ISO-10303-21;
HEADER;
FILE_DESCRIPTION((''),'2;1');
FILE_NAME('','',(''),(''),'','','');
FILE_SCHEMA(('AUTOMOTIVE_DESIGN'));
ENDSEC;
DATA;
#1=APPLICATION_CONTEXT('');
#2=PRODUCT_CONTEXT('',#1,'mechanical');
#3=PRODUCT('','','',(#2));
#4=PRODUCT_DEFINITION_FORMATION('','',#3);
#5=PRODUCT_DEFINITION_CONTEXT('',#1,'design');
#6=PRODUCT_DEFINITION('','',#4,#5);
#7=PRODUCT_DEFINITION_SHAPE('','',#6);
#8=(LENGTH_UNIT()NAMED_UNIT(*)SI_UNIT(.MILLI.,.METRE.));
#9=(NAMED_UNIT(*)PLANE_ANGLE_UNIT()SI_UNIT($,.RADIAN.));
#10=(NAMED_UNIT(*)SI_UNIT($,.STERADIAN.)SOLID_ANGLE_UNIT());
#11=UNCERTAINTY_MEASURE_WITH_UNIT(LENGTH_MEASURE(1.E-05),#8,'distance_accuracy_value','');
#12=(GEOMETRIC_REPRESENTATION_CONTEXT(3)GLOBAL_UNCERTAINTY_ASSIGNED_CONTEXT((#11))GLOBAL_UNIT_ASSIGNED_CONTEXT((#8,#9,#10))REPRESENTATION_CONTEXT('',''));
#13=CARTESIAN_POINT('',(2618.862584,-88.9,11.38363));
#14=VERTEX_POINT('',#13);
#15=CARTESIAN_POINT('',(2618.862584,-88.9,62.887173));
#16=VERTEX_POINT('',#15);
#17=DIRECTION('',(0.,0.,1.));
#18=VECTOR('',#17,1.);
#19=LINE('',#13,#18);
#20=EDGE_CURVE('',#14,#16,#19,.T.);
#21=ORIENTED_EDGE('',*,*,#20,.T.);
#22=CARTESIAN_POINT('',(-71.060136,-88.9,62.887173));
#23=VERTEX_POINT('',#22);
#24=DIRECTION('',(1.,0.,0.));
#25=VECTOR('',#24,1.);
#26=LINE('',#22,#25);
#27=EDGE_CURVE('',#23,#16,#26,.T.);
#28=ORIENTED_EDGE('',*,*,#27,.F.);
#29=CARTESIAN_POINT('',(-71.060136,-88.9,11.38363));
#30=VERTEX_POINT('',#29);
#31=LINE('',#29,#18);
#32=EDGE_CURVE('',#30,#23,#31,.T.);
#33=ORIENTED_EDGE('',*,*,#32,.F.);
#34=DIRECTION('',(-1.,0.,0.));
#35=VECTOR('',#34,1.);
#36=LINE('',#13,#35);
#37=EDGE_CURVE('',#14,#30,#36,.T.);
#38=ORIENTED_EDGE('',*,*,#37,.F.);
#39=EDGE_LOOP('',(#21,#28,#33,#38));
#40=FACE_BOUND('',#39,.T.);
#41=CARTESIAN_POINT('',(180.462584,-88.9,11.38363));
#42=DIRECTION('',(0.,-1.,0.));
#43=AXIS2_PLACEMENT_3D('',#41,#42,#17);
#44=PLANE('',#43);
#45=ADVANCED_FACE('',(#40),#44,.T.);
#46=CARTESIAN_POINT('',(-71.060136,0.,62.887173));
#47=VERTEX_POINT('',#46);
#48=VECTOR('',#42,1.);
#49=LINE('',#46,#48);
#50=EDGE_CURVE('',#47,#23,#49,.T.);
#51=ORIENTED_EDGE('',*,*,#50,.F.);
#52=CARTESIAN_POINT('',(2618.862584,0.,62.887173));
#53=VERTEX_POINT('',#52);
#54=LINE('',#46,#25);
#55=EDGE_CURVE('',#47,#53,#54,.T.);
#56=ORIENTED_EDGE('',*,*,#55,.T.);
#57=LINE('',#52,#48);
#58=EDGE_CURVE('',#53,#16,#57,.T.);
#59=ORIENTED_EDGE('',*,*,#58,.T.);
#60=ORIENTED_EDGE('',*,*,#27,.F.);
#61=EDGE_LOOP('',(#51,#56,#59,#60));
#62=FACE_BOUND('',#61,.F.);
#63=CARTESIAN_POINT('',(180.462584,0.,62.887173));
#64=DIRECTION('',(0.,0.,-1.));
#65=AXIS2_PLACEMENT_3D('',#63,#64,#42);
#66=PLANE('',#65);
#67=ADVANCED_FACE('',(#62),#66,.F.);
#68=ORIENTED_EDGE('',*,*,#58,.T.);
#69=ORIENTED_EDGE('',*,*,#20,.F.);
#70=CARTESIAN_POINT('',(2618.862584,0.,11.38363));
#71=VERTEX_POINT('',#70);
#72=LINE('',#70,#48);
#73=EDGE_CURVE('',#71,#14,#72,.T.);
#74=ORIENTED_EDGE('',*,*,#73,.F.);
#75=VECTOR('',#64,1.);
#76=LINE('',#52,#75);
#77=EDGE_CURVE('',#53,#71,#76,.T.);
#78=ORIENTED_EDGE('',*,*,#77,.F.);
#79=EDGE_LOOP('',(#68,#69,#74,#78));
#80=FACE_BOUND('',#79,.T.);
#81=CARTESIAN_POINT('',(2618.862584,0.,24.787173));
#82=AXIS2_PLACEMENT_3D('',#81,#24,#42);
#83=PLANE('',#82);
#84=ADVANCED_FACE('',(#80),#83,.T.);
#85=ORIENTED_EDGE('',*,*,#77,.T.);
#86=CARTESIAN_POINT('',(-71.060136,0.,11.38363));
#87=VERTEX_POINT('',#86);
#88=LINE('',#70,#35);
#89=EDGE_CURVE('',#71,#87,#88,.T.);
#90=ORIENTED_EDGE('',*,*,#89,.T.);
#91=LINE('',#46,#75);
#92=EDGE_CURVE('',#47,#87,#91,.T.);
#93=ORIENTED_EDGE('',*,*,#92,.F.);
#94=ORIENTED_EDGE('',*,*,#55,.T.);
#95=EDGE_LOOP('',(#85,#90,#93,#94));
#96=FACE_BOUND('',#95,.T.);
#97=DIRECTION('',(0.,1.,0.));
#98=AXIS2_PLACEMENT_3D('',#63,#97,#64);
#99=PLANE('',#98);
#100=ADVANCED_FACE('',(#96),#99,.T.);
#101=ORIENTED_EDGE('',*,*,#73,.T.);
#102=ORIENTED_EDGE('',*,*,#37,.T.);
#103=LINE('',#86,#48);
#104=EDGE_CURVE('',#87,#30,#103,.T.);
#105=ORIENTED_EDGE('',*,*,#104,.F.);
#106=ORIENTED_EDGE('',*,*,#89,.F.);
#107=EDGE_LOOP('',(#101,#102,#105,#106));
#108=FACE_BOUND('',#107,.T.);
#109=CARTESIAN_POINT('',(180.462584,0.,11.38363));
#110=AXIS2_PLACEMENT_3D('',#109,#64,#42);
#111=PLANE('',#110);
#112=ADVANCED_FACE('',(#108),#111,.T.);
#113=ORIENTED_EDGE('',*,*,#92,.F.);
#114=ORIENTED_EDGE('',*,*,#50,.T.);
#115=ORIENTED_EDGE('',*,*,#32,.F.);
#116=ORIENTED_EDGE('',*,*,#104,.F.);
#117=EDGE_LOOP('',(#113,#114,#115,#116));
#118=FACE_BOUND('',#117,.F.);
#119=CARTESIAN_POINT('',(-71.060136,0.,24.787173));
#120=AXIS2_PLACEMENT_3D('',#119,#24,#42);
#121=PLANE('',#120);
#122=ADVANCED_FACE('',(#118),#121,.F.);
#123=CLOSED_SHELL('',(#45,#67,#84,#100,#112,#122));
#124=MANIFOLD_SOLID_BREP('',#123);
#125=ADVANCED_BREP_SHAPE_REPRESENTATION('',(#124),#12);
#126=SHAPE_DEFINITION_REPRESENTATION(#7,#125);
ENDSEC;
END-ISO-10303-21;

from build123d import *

# Parameters (mm, degrees)
F1_W     = 251.5227198601
F1_H     = 13.4035423398
F2_DEPTH = 88.9
F3_DEPTH = 38.1
F4_DEPTH = 2438.4


# Not quite as in the source:
# - a feature of the source that left no trace in its solid (it failed there, or was rolled back) is left out


with BuildPart() as f2:
    # F1 (on face) → F2 (new body)
    with BuildSketch(Plane.XZ):
        with Locations((54.7012239695, 18.0854015052)):
            Rectangle(F1_W, F1_H)
    extrude(amount=F2_DEPTH)

    # F3 (add): a face of the model
    f3_faces = [f2.faces().sort_by_distance(p)[0] for p in [
        (54.7012239695, -44.45, 24.7871726751),
    ]]
    extrude(f3_faces, amount=F3_DEPTH)

    # F4 (add): a face of the model
    f4_faces = [f2.faces().sort_by_distance(p)[0] for p in [
        (180.4625838995, -44.45, 37.1354015052),
    ]]
    extrude(f4_faces, amount=F4_DEPTH)


solid = f2.part
